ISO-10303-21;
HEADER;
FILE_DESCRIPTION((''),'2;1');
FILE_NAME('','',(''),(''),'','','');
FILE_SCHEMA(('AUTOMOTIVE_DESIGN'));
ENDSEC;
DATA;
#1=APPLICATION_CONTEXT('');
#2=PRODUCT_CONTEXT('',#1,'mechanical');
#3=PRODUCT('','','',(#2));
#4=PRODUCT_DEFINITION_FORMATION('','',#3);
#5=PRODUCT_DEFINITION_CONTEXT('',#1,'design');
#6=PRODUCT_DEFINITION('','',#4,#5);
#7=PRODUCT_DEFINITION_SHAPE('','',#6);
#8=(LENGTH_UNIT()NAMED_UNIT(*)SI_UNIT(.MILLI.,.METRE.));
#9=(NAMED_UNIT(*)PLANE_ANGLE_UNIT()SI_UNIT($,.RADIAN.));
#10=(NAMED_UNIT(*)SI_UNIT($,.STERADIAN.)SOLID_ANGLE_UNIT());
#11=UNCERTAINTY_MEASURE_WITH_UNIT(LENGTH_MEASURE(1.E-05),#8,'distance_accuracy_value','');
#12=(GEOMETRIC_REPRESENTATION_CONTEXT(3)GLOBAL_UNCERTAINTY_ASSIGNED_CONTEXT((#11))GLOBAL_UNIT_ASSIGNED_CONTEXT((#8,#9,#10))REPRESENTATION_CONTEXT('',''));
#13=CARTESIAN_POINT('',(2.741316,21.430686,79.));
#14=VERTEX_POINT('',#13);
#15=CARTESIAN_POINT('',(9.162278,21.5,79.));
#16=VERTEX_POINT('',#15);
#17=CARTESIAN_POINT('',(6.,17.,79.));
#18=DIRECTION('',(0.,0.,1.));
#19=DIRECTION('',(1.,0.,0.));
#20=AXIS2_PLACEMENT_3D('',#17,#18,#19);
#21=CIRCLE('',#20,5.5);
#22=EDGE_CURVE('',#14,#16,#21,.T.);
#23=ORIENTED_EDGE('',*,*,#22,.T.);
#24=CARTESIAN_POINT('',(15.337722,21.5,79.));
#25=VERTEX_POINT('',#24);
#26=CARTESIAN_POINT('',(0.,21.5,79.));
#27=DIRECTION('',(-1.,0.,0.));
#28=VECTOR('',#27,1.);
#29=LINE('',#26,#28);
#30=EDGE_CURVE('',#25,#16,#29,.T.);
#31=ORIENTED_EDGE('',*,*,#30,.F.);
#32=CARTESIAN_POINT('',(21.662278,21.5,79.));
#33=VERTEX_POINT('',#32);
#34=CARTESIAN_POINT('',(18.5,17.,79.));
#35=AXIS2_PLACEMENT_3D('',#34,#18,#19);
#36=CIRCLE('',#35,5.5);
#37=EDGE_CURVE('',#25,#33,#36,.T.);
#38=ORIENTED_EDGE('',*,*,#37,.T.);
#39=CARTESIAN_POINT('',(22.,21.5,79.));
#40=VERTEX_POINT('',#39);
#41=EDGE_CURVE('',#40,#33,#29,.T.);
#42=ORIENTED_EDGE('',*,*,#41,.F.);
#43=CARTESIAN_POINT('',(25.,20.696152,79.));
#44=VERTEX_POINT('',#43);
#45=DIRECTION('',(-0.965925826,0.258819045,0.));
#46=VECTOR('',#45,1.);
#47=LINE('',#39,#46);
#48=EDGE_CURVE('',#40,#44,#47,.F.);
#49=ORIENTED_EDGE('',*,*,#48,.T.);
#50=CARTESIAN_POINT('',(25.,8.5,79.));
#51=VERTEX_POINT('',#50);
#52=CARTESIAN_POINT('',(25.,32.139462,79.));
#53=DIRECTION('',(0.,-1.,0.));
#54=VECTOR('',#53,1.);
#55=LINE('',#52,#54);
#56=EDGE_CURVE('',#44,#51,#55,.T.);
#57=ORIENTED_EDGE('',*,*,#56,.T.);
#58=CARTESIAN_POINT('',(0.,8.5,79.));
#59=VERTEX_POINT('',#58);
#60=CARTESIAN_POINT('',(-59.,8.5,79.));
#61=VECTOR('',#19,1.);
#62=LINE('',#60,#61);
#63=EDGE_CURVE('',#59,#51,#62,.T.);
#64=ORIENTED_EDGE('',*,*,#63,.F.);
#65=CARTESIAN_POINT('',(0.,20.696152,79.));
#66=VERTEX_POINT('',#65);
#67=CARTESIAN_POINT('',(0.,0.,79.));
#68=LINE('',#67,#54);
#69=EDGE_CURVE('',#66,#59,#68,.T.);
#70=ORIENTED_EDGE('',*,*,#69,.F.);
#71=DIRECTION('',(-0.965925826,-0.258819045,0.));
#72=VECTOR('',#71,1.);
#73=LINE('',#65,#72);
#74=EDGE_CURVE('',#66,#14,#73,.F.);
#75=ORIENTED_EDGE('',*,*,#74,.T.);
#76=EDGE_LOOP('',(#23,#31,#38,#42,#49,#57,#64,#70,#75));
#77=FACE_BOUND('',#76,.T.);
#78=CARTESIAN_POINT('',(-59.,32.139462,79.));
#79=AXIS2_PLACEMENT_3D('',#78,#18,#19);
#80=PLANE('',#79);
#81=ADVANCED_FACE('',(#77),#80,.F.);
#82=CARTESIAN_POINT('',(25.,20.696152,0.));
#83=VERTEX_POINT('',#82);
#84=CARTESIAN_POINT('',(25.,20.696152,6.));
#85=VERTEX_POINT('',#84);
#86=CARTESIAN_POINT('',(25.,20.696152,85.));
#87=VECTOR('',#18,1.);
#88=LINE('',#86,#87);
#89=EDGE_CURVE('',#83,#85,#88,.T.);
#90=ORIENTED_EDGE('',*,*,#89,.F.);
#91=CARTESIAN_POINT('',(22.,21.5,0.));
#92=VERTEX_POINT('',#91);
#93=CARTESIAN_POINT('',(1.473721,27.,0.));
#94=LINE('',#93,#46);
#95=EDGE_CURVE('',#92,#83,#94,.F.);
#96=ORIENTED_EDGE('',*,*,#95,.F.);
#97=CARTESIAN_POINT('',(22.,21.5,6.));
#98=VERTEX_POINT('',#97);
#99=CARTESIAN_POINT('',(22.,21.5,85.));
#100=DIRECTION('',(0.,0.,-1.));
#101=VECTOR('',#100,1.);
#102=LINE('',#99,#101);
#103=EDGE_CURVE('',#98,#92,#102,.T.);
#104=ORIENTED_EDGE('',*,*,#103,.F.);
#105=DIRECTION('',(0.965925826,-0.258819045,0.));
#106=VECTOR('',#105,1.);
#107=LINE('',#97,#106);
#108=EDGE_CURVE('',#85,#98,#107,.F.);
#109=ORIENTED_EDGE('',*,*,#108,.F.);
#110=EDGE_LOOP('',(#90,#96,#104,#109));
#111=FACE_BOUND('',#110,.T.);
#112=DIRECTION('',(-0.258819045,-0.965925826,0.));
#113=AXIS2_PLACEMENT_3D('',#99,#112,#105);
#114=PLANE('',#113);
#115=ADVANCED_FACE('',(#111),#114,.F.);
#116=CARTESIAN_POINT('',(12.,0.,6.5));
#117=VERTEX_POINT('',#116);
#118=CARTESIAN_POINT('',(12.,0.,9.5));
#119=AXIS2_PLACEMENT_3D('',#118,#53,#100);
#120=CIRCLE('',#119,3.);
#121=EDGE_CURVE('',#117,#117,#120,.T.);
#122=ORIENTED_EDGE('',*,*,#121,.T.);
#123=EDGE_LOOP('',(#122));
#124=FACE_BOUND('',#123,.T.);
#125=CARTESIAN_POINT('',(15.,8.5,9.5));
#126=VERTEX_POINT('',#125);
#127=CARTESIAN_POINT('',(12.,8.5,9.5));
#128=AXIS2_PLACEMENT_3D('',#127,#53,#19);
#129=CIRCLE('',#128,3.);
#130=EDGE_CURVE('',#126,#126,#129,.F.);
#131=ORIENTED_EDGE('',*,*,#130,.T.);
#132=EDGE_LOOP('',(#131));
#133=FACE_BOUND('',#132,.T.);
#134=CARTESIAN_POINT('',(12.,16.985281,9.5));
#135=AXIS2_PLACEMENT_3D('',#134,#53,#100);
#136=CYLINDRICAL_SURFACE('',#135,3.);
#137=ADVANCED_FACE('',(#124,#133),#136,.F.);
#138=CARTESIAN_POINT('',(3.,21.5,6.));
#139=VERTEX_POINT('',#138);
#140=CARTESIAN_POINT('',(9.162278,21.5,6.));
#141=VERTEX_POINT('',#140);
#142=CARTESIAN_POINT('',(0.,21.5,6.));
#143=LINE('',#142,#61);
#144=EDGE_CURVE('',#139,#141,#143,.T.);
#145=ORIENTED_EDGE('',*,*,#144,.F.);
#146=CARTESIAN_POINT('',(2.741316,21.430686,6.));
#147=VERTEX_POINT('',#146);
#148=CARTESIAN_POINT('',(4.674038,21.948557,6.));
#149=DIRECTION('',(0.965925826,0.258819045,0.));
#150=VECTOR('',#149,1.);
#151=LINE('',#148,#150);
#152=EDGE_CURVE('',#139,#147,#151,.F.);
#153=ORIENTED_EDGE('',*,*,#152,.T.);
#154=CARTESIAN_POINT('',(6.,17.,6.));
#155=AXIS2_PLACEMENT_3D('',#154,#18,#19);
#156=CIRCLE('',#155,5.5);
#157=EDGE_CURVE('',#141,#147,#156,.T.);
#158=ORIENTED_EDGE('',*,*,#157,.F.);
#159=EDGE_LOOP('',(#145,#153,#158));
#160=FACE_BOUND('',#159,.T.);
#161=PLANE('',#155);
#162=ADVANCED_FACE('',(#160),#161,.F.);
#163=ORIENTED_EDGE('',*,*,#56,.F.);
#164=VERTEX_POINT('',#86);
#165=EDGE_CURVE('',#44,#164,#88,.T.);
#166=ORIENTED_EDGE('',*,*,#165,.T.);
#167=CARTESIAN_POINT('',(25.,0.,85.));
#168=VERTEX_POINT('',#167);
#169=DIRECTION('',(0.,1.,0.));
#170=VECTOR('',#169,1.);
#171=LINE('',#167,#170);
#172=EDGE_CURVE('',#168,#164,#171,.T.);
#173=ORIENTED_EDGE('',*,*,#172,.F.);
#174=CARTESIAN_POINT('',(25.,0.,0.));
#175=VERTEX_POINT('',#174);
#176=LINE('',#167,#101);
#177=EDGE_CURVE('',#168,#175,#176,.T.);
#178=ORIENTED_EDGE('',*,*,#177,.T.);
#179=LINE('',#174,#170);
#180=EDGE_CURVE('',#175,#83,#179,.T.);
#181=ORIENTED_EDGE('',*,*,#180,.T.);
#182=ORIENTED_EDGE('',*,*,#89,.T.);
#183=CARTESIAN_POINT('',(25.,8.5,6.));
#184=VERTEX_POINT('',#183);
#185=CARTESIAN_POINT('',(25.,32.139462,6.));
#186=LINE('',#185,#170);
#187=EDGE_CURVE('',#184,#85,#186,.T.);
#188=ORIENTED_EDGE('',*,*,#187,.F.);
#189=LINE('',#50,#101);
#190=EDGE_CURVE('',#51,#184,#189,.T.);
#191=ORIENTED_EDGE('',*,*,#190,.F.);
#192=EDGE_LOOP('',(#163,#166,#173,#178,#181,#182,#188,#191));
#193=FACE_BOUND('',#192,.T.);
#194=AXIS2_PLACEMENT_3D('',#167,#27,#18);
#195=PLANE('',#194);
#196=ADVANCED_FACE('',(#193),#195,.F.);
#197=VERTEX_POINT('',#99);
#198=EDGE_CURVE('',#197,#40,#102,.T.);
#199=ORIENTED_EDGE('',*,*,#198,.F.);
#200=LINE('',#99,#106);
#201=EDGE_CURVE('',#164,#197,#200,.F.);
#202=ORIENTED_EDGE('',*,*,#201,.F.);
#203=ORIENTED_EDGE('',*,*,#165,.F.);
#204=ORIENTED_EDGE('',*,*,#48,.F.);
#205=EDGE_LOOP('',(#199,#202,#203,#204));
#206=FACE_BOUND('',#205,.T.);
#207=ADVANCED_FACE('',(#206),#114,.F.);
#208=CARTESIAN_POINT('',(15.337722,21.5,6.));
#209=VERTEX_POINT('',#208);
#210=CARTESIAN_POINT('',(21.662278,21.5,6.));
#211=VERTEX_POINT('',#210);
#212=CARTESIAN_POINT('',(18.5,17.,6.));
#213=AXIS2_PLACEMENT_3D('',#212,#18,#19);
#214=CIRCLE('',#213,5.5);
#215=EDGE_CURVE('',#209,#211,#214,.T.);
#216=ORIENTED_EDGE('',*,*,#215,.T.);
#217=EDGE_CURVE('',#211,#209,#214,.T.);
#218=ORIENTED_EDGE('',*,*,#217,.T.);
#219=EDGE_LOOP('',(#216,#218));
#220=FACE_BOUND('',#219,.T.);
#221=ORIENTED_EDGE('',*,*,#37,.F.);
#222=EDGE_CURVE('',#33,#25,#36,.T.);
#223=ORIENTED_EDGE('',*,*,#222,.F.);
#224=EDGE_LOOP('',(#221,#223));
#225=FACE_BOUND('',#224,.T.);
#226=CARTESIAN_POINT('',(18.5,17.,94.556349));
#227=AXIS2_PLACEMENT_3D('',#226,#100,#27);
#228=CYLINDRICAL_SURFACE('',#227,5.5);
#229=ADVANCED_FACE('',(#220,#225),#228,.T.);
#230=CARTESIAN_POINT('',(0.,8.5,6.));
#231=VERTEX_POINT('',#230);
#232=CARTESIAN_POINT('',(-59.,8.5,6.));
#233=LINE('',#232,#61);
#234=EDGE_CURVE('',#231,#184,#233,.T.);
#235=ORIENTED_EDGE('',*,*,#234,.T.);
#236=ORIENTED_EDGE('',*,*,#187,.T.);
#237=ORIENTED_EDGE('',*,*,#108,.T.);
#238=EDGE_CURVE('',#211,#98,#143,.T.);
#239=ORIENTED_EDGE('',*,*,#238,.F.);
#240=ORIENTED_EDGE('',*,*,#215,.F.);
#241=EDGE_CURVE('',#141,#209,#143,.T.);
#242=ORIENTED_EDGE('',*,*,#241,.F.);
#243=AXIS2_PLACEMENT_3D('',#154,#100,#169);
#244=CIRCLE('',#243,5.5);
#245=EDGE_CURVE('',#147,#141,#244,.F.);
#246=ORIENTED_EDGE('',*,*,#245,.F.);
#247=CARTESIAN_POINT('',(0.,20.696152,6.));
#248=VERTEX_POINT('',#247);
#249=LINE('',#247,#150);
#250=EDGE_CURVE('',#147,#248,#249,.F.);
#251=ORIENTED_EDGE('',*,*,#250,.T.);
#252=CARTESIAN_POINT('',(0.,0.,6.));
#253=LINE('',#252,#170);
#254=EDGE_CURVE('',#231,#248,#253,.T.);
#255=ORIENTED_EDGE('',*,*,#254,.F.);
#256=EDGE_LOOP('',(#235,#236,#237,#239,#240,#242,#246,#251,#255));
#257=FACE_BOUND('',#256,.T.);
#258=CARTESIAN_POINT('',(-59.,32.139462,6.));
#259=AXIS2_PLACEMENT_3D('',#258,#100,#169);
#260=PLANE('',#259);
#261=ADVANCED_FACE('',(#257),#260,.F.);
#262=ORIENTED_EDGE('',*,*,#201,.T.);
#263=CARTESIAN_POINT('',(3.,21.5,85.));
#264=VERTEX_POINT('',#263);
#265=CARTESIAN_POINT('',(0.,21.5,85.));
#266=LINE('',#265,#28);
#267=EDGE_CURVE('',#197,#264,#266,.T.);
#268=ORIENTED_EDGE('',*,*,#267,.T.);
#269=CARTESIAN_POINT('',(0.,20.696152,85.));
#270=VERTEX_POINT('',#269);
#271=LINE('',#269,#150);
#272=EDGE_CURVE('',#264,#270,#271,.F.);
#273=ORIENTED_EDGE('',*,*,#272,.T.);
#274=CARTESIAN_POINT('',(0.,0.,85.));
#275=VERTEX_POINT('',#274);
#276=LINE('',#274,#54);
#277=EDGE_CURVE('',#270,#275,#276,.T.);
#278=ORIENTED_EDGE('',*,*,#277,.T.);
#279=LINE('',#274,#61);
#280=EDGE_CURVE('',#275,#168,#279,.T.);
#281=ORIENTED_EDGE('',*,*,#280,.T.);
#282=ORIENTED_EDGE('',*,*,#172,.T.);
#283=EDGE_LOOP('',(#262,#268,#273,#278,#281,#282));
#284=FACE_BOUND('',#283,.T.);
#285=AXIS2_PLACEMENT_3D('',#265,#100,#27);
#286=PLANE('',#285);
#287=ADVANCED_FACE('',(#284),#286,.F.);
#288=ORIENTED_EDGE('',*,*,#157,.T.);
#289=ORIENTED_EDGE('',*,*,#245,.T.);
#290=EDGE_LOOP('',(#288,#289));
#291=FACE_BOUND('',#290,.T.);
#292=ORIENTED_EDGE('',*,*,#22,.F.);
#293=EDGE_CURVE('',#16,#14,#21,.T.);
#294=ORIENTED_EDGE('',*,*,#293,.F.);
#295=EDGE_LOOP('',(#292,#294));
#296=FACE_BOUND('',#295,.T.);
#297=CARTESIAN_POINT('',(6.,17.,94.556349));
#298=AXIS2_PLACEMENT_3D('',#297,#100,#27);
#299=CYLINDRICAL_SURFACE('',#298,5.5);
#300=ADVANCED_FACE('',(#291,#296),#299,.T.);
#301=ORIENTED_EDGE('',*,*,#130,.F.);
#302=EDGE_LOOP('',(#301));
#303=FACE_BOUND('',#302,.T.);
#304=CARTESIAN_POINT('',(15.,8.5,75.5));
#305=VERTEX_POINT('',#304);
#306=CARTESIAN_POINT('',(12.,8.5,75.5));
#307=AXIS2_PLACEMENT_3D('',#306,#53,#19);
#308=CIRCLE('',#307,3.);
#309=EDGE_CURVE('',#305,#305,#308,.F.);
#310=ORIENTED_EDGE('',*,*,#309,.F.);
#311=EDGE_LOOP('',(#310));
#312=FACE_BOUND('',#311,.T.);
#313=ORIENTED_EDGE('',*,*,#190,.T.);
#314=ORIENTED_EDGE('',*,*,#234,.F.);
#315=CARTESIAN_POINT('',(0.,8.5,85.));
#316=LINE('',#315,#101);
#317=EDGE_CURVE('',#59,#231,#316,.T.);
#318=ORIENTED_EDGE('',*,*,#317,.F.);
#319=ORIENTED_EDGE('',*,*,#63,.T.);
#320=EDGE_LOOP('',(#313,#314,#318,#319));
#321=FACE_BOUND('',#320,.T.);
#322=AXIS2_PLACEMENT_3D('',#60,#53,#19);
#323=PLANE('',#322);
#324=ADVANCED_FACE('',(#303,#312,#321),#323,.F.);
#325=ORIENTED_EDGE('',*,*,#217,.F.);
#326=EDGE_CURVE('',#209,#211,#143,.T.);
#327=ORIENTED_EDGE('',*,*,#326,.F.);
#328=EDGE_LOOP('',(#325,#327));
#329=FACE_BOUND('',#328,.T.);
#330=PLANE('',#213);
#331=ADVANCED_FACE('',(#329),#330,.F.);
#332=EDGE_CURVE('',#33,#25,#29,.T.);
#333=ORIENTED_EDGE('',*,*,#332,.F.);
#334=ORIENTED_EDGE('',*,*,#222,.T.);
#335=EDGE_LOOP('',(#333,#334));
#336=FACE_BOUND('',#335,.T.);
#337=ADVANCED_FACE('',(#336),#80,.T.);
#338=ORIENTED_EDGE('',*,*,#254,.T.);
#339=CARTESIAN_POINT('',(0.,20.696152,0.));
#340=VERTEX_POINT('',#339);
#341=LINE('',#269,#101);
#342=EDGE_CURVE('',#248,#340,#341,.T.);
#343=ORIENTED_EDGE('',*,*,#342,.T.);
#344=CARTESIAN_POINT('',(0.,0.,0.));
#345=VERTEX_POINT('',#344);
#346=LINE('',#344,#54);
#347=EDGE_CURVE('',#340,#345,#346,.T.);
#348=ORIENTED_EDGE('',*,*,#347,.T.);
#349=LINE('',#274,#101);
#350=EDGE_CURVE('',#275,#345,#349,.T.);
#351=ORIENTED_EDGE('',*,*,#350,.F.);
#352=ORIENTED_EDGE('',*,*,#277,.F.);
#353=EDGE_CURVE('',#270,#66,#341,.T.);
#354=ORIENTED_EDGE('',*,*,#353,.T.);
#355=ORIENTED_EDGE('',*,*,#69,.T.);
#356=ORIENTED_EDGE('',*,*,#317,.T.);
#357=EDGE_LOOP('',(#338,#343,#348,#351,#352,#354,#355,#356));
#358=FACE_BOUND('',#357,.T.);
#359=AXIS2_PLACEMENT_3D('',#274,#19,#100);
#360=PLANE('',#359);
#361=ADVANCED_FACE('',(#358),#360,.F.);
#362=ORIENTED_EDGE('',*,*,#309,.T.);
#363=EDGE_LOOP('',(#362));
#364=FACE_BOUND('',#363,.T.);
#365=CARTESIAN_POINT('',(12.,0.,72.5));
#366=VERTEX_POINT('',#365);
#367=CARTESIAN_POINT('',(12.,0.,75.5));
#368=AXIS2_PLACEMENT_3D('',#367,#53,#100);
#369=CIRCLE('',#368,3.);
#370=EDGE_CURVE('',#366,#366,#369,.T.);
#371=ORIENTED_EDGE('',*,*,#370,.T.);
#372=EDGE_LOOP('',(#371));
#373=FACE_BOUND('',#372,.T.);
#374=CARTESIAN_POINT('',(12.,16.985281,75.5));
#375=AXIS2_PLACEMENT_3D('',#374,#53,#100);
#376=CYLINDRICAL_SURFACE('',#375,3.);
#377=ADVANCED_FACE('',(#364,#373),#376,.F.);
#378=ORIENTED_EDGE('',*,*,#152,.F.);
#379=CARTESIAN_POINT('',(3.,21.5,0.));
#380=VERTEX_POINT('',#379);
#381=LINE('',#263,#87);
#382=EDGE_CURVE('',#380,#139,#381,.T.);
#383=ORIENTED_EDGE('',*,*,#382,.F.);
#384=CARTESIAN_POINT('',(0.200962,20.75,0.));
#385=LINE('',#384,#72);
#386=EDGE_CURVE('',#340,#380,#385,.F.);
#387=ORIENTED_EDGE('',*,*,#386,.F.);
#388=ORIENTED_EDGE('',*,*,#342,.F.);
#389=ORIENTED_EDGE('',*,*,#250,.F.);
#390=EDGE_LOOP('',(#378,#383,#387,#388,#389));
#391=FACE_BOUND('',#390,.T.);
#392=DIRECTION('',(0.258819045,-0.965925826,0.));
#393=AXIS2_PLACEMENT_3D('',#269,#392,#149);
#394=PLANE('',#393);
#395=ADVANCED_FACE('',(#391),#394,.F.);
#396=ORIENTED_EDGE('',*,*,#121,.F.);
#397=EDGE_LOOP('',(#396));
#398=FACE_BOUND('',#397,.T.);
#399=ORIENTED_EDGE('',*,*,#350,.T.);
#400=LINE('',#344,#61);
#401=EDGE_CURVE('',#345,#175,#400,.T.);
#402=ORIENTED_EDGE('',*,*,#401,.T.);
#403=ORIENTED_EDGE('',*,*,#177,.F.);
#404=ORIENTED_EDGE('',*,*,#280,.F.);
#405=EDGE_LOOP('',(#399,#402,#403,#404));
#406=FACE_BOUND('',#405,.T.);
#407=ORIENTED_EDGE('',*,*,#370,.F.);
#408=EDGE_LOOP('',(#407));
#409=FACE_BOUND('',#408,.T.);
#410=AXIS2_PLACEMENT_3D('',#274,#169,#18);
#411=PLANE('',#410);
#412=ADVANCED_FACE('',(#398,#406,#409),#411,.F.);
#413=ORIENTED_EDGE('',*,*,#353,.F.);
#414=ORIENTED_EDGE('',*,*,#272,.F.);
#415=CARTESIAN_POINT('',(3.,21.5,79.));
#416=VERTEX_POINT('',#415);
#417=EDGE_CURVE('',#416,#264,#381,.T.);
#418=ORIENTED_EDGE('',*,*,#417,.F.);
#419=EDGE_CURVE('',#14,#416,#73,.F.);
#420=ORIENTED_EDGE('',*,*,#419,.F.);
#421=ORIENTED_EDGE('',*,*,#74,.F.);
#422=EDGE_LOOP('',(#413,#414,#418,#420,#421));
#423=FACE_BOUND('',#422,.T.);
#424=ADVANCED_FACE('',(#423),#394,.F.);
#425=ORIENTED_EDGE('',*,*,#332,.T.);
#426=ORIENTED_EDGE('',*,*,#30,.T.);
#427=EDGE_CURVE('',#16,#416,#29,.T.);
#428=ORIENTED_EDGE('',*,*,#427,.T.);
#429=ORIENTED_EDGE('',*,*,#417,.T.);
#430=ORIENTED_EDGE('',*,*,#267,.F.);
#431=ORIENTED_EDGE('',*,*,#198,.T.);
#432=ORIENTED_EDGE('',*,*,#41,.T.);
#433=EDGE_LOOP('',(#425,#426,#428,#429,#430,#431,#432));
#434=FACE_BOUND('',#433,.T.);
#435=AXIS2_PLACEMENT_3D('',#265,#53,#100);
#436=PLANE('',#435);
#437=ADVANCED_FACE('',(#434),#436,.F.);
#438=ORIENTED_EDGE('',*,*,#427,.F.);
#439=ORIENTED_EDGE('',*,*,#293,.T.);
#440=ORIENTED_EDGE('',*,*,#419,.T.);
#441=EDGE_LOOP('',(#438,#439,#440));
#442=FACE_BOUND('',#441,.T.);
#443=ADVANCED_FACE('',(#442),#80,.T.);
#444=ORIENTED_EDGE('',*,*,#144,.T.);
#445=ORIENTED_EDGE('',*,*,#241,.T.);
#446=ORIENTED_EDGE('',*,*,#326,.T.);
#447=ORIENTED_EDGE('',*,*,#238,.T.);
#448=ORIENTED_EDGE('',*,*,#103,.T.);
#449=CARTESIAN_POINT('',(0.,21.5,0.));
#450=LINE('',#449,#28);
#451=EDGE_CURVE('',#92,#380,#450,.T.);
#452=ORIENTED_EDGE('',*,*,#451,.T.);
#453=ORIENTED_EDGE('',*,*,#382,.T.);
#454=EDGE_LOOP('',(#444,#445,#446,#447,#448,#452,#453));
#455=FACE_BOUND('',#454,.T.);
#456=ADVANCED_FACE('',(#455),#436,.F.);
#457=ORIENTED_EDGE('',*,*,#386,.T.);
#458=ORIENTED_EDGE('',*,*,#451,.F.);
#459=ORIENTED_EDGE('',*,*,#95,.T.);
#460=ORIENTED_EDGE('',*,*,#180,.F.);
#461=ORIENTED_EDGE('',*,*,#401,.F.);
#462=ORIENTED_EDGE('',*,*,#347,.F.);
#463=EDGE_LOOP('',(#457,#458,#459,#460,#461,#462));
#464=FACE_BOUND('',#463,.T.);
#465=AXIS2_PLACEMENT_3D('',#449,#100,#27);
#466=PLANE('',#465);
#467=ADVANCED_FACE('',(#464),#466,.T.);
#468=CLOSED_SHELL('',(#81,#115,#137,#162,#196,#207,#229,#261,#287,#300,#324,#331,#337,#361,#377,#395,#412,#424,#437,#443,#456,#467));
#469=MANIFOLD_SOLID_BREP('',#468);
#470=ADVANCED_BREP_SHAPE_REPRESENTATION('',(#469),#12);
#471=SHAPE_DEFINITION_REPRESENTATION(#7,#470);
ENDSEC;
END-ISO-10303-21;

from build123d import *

# Parameters (mm, degrees)
SCHIZZO1_W               = 25
SCHIZZO1_H               = 21.5
ESTRUSIONE1_DEPTH        = 85
SCHIZZO6_W               = 73
SCHIZZO6_H               = 23.639461627
TAGLIO_ESTRUSIONE4_DEPTH = 84
SCHIZZO7_R               = 5.5
ESTRUSIONE4_DEPTH        = 73
SMUSSO1_SIZE             = 0.803847577
SMUSSO1_SIZE_2           = 3
SCHIZZO8_R               = 3
TAGLIO_ESTRUSIONE5_DEPTH = 8.5


with BuildPart() as part:
    # Schizzo1 → Estrusione1 (new body)
    with BuildSketch(Plane.XY):
        with Locations((12.5, 10.75)):
            Rectangle(SCHIZZO1_W, SCHIZZO1_H)
    extrude(amount=ESTRUSIONE1_DEPTH)

    # Schizzo6 → Taglio-Estrusione4 (cut)
    with BuildSketch(Plane(origin=(25, 0, 0), x_dir=(0, 0, -1), z_dir=(1, 0, 0))):
        with Locations((-42.5, 20.319730814)):
            Rectangle(SCHIZZO6_W, SCHIZZO6_H)
    extrude(amount=-TAGLIO_ESTRUSIONE4_DEPTH, mode=Mode.SUBTRACT)

    # Schizzo7 → Estrusione4 (add)
    with BuildSketch(Plane.XY.offset(6)):
        with Locations(Location((6, 17, 0), (0, 0, 125.096801228))):
            Circle(SCHIZZO7_R)
        with Locations(Location((18.5, 17, 0), (0, 0, 125.096801228))):
            Circle(SCHIZZO7_R)
    extrude(amount=ESTRUSIONE4_DEPTH)

    # Smusso1
    # the kernel refuses this chamfer: 3, 0.803847577 mm, written as the material it takes off along each edge
    with BuildSketch(Plane(origin=(0, 21.5, -7.790164711), x_dir=(-0.13751244702128895, -0.9905000388259545, 0), z_dir=(0, 0, 1)), Plane(origin=(0, 21.5, 79), x_dir=(-0.13751244702128895, -0.9905000388259545, 0), z_dir=(0, 0, 1))) as smusso1_piece_1:
        Polygon((SMUSSO1_SIZE * 0.990500039187, SMUSSO1_SIZE * 0.137512447071), (-SMUSSO1_SIZE_2 * 0.137512447021, SMUSSO1_SIZE_2 * 0.990500038826), (0, 0), align=None)
    extrude(amount=13.790164711, mode=Mode.SUBTRACT)
    with BuildSketch(Plane(origin=(25, 21.5, -7.790164711), x_dir=(0.13751244702128734, -0.9905000388259546, 0), z_dir=(0, 0, 1)), Plane(origin=(25, 21.5, 71.209835289), x_dir=(0.13751244702128734, -0.9905000388259546, 0), z_dir=(0, 0, 1))) as smusso1_piece_2:
        Polygon((SMUSSO1_SIZE * 0.990500039187, -SMUSSO1_SIZE * 0.137512447071), (-SMUSSO1_SIZE_2 * 0.137512447021, -SMUSSO1_SIZE_2 * 0.990500038826), (0, 0), align=None)
    extrude(amount=21.580329421, mode=Mode.SUBTRACT)

    # Schizzo8 → Taglio-Estrusione5 (cut)
    with BuildSketch(Plane.XZ):
        with Locations(Location((12, 75.5, 0), (0, 0, 270))):
            Circle(SCHIZZO8_R)
        with Locations(Location((12, 9.5, 0), (0, 0, 270))):
            Circle(SCHIZZO8_R)
    extrude(amount=-TAGLIO_ESTRUSIONE5_DEPTH, mode=Mode.SUBTRACT)


solid = part.part
